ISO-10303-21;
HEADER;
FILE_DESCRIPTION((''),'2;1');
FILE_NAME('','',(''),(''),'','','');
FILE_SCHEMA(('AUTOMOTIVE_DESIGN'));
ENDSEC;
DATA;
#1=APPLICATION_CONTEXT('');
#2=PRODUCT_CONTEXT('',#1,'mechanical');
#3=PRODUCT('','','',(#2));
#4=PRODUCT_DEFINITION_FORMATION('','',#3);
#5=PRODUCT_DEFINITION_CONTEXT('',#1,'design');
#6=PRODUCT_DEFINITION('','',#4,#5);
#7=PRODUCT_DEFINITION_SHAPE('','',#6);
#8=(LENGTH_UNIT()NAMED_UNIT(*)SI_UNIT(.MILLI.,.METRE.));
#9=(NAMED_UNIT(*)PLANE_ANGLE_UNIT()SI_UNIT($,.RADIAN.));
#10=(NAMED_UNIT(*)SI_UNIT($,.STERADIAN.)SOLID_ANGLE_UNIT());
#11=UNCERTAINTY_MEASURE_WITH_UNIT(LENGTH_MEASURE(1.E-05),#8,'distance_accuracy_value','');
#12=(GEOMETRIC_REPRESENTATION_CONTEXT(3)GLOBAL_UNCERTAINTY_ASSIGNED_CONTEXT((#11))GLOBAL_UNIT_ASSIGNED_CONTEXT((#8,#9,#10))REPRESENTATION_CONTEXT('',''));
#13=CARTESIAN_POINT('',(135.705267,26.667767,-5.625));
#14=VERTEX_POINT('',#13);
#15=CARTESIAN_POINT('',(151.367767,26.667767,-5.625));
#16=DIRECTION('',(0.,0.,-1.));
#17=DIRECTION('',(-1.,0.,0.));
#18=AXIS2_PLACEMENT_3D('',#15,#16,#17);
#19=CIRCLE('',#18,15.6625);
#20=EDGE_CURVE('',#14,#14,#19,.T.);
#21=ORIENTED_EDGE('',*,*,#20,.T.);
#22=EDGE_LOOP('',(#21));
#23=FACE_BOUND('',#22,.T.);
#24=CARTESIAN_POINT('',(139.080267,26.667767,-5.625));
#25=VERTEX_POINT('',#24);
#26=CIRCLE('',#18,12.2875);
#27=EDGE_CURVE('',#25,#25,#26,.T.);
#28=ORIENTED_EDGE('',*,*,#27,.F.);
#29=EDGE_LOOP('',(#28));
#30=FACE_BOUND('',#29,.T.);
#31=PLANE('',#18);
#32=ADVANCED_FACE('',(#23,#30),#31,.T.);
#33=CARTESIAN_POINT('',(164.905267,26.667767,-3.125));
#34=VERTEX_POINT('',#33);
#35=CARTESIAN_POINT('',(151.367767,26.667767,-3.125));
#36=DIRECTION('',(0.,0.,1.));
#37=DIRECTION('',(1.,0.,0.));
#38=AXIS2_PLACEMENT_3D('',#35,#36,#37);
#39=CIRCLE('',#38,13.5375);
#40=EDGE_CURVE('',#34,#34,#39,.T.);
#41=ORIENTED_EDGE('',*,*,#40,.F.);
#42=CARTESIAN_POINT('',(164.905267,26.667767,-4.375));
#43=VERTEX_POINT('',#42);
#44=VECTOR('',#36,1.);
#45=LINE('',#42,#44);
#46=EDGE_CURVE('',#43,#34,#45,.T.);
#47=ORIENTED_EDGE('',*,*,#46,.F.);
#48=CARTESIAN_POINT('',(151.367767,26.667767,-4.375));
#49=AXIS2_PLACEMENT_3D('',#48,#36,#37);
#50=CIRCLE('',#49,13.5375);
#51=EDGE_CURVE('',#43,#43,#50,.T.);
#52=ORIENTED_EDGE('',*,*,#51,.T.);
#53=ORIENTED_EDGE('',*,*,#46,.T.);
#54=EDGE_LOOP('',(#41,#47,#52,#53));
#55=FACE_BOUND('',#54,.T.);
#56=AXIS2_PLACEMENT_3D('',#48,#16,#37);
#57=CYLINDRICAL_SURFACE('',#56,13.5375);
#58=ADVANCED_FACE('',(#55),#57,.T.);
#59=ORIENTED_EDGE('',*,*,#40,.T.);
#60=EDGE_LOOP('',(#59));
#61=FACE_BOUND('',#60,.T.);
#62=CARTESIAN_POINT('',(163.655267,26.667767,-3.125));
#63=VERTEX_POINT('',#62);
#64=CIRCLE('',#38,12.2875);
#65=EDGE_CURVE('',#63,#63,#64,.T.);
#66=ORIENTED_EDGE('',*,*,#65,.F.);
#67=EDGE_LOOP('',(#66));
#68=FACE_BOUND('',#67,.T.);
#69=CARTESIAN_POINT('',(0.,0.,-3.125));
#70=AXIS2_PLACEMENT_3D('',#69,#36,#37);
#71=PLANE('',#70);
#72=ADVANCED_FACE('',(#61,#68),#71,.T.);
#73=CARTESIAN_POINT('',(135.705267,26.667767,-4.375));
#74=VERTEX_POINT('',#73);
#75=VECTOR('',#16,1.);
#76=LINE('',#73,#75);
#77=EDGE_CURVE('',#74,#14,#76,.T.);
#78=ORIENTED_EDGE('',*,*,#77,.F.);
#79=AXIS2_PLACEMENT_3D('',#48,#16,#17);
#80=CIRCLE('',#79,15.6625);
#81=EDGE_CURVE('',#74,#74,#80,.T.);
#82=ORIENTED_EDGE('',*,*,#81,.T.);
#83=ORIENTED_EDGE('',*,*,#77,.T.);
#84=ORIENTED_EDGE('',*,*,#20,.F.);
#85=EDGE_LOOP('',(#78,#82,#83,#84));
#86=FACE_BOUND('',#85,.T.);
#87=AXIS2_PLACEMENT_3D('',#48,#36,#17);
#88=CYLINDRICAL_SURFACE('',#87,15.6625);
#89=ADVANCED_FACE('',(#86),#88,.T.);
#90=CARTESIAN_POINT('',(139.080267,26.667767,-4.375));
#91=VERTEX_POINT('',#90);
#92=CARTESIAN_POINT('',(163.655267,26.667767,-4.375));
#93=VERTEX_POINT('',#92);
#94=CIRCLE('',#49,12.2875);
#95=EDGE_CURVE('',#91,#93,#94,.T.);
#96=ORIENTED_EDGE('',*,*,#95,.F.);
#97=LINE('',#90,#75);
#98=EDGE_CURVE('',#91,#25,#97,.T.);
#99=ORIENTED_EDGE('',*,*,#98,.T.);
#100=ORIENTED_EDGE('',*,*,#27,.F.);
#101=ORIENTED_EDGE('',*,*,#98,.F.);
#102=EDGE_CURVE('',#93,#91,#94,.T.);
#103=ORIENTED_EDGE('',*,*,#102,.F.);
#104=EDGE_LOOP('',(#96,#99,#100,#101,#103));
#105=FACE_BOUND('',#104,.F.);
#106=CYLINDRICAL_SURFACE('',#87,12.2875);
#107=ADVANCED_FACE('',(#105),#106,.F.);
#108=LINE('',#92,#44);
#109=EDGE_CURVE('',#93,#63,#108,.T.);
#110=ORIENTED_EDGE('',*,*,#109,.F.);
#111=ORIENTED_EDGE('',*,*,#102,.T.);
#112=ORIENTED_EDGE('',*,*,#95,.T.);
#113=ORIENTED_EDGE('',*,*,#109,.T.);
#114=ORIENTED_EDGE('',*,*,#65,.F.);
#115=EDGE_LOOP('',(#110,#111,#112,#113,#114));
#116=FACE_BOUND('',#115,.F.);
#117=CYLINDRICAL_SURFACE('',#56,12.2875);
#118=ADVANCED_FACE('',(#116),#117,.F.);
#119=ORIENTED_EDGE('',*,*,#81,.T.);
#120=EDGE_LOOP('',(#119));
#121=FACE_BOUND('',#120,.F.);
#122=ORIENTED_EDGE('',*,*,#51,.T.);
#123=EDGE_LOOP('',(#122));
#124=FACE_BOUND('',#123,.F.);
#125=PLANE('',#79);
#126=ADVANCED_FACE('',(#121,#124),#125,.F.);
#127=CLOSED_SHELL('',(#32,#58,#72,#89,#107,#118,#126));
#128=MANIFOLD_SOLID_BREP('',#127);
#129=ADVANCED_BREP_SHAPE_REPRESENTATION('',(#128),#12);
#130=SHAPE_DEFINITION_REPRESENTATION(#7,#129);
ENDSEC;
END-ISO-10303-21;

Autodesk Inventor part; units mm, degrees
ref_plane "YZ Plane" through (0, 0, 0) normal (1, 0, 0) x (0, 1, 0)
ref_plane "XZ Plane" through (0, 0, 0) normal (0, 1, 0) x (-1, 0, 0)
sketch "Sketch1" plane through (0, 0, 0) normal (0, 0, 1) x (1, 0, 0)
  circle A0 centre (151.367767, 26.667767) radius 13.575
  circle A1 centre (151.367767, 26.667767) radius 13.5375
  circle A2 centre (151.367767, 26.667767) radius 12.2875
  point P0 (0, 0)
  dimension "d0" = 0.0375
  dimension "d1" = 1.25
ref_plane "Work Plane1" through (-21.967767, 1.0375, -4.375) normal (0, 0, -1) x (0, 1, 0)
sketch "Sketch1 outline for Extrusion1" plane through (0, 0, 0) normal (0, 0, 1) x (1, 0, 0)
  circle A0 centre (151.367767, 26.667767) radius 13.5375
  circle A1 centre (151.367767, 26.667767) radius 12.2875
extrude "Extrusion1" add sketch "Sketch1 outline for Extrusion1" along normal blind 1.25 from surface at -4.375
sketch "Sketch2" plane through (151.367767, 26.667767, -4.375) normal (0, 0, -1) x (-1, 0, 0)
  circle A0 centre (0, 0) radius 13.5375 projected
  circle A1 centre (0, 0) radius 12.2875 projected
  circle A2 centre (0, 0) radius 13.6625
  circle A3 centre (0, 0) radius 15.6625
  point P0 (151.367767, -26.667767)
  dimension "d4" = 0.125
  dimension "d5" = 2
extrude "Extrusion2" add sketch "Sketch2" along normal blind 1.25 contours A0 | A2 | A3
properties part number "One Inch Lense Holder Cover (V5)"
